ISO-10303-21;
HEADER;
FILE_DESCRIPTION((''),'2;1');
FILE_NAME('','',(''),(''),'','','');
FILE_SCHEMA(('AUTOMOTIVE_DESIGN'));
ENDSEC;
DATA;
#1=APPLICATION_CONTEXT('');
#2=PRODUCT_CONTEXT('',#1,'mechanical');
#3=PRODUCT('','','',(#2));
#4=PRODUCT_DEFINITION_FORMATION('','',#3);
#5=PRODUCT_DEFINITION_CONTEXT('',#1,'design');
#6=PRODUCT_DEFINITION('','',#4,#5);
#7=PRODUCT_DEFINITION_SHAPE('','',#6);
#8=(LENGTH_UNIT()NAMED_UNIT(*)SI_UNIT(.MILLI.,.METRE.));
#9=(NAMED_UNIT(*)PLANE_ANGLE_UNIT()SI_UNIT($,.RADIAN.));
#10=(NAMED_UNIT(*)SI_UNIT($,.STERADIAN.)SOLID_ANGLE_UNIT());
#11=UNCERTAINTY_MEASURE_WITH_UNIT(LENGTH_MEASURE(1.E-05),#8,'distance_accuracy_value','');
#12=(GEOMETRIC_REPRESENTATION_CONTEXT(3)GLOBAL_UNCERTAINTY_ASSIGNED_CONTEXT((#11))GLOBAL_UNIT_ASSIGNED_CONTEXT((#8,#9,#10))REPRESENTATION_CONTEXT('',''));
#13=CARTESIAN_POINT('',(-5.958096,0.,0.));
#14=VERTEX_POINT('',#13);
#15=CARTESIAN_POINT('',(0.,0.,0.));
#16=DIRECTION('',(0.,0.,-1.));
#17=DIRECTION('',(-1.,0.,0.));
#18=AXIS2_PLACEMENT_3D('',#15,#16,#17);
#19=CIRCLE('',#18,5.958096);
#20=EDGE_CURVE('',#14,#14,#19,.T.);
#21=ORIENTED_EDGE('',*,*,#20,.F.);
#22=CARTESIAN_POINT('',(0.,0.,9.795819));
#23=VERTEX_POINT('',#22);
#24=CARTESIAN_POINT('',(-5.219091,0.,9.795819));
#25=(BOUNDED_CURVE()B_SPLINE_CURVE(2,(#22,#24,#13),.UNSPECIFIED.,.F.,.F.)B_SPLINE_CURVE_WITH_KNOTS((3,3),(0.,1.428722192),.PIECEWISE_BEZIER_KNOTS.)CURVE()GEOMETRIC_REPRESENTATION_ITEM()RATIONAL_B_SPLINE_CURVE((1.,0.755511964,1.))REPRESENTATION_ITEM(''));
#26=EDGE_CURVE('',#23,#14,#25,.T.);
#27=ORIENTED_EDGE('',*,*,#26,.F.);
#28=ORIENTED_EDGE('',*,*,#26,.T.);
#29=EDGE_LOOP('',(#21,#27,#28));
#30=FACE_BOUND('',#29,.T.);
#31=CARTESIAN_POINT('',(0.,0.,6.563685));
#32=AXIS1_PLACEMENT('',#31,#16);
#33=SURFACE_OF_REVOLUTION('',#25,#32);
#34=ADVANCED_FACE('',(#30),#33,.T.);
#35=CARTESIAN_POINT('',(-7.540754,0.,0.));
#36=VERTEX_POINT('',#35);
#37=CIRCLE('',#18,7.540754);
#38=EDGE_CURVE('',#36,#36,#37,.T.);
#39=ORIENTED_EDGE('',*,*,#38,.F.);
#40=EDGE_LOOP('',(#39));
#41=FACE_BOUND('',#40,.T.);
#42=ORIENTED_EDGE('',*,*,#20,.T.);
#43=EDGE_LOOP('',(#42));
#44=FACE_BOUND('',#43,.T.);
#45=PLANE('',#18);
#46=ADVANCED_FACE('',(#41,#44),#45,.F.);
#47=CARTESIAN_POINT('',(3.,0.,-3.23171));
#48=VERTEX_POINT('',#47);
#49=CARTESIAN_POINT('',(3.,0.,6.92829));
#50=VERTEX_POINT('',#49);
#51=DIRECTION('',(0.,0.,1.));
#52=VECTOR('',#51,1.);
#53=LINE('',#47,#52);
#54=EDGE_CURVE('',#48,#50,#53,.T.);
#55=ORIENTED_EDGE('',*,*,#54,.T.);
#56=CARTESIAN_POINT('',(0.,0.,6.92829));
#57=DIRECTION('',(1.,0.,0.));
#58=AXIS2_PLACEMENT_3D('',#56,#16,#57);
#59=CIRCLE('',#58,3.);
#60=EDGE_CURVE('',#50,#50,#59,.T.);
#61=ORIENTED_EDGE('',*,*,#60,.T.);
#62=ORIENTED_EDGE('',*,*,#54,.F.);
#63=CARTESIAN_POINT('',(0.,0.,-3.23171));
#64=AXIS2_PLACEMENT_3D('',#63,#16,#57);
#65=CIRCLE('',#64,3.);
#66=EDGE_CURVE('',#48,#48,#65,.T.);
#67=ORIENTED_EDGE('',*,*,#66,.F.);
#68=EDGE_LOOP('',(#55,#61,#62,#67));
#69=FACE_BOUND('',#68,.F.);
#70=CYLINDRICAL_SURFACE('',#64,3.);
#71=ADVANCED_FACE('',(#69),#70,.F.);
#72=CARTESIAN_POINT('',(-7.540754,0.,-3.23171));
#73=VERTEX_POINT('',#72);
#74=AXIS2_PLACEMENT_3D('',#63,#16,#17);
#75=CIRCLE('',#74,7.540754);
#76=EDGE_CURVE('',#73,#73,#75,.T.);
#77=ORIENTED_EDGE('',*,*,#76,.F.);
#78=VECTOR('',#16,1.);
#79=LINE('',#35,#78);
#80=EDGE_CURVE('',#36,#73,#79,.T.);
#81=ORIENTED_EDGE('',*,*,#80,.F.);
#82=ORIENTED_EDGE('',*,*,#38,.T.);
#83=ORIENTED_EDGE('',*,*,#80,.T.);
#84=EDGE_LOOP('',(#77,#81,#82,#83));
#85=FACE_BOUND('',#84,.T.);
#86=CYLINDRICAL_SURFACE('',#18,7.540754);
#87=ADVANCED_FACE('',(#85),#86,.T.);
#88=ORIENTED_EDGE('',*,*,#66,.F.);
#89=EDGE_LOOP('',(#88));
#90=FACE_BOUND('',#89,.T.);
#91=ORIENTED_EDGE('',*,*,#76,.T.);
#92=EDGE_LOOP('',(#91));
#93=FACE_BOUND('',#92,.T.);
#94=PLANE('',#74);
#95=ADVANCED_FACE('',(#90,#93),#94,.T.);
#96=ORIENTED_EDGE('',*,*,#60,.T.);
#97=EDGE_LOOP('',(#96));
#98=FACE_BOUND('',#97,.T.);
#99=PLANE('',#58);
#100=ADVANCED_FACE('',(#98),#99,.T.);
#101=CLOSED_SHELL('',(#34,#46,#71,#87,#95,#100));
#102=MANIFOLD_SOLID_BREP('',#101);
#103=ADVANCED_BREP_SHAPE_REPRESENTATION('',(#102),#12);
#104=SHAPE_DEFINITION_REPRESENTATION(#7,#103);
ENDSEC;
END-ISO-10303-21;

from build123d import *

# Parameters (mm, degrees)
F2_R     = 3
F3_DEPTH = 10.16


# Not quite as in the source:
# - a feature names something its author has since deleted; it is built from what else it names


with BuildPart() as f1:
    # F0 (on Front) → F1 (revolve)
    with BuildSketch(Plane.XZ):
        with BuildLine():
            Line((-5.9580963571, 0), (-7.5407535769, 0))
            Line((-7.5407535769, 0), (-7.5407535769, -3.2317098148))
            Line((-7.5407535769, -3.2317098148), (-5.9580963571, -3.2317098148))
            add(Edge.make_bspline(
                [(-5.9580963571, 0), (-6.0799979609, -1.6158549074), (-5.9580963571, -3.2317098148)],
                knots=[1.4287221918, 1.4287221918, 1.4287221918, 1.7128704618, 1.7128704618, 1.7128704618], degree=2, weights=[1, 0.9899244352, 1]))
        make_face()
        with BuildLine():
            add(Edge.make_bspline(
                [(0, 9.7958194092), (-5.2190905892, 9.7958194092), (-5.9580963571, 0)],
                knots=[0, 0, 0, 1.4287221918, 1.4287221918, 1.4287221918], degree=2, weights=[1, 0.7555119637, 1]))
            add(Edge.make_bspline(
                [(-5.9580963571, 0), (-6.0799979609, -1.6158549074), (-5.9580963571, -3.2317098148)],
                knots=[1.4287221918, 1.4287221918, 1.4287221918, 1.7128704618, 1.7128704618, 1.7128704618], degree=2, weights=[1, 0.9899244352, 1]))
            Line((-5.9580963571, -3.2317098148), (0, -3.2317098148))
            Line((0, -3.2317098148), (0, 9.7958194092))
        make_face()
    revolve(axis=Axis((0, 0, 6.5636849072), (0, 0, -1)))

    # F2 (on face) → F3 (cut)
    with BuildSketch(Plane(origin=(0, 0, -3.2317098148), x_dir=(1, 0, 0), z_dir=(0, 0, -1))):
        Circle(F2_R)
    extrude(amount=-F3_DEPTH, mode=Mode.SUBTRACT)


solid = f1.part
